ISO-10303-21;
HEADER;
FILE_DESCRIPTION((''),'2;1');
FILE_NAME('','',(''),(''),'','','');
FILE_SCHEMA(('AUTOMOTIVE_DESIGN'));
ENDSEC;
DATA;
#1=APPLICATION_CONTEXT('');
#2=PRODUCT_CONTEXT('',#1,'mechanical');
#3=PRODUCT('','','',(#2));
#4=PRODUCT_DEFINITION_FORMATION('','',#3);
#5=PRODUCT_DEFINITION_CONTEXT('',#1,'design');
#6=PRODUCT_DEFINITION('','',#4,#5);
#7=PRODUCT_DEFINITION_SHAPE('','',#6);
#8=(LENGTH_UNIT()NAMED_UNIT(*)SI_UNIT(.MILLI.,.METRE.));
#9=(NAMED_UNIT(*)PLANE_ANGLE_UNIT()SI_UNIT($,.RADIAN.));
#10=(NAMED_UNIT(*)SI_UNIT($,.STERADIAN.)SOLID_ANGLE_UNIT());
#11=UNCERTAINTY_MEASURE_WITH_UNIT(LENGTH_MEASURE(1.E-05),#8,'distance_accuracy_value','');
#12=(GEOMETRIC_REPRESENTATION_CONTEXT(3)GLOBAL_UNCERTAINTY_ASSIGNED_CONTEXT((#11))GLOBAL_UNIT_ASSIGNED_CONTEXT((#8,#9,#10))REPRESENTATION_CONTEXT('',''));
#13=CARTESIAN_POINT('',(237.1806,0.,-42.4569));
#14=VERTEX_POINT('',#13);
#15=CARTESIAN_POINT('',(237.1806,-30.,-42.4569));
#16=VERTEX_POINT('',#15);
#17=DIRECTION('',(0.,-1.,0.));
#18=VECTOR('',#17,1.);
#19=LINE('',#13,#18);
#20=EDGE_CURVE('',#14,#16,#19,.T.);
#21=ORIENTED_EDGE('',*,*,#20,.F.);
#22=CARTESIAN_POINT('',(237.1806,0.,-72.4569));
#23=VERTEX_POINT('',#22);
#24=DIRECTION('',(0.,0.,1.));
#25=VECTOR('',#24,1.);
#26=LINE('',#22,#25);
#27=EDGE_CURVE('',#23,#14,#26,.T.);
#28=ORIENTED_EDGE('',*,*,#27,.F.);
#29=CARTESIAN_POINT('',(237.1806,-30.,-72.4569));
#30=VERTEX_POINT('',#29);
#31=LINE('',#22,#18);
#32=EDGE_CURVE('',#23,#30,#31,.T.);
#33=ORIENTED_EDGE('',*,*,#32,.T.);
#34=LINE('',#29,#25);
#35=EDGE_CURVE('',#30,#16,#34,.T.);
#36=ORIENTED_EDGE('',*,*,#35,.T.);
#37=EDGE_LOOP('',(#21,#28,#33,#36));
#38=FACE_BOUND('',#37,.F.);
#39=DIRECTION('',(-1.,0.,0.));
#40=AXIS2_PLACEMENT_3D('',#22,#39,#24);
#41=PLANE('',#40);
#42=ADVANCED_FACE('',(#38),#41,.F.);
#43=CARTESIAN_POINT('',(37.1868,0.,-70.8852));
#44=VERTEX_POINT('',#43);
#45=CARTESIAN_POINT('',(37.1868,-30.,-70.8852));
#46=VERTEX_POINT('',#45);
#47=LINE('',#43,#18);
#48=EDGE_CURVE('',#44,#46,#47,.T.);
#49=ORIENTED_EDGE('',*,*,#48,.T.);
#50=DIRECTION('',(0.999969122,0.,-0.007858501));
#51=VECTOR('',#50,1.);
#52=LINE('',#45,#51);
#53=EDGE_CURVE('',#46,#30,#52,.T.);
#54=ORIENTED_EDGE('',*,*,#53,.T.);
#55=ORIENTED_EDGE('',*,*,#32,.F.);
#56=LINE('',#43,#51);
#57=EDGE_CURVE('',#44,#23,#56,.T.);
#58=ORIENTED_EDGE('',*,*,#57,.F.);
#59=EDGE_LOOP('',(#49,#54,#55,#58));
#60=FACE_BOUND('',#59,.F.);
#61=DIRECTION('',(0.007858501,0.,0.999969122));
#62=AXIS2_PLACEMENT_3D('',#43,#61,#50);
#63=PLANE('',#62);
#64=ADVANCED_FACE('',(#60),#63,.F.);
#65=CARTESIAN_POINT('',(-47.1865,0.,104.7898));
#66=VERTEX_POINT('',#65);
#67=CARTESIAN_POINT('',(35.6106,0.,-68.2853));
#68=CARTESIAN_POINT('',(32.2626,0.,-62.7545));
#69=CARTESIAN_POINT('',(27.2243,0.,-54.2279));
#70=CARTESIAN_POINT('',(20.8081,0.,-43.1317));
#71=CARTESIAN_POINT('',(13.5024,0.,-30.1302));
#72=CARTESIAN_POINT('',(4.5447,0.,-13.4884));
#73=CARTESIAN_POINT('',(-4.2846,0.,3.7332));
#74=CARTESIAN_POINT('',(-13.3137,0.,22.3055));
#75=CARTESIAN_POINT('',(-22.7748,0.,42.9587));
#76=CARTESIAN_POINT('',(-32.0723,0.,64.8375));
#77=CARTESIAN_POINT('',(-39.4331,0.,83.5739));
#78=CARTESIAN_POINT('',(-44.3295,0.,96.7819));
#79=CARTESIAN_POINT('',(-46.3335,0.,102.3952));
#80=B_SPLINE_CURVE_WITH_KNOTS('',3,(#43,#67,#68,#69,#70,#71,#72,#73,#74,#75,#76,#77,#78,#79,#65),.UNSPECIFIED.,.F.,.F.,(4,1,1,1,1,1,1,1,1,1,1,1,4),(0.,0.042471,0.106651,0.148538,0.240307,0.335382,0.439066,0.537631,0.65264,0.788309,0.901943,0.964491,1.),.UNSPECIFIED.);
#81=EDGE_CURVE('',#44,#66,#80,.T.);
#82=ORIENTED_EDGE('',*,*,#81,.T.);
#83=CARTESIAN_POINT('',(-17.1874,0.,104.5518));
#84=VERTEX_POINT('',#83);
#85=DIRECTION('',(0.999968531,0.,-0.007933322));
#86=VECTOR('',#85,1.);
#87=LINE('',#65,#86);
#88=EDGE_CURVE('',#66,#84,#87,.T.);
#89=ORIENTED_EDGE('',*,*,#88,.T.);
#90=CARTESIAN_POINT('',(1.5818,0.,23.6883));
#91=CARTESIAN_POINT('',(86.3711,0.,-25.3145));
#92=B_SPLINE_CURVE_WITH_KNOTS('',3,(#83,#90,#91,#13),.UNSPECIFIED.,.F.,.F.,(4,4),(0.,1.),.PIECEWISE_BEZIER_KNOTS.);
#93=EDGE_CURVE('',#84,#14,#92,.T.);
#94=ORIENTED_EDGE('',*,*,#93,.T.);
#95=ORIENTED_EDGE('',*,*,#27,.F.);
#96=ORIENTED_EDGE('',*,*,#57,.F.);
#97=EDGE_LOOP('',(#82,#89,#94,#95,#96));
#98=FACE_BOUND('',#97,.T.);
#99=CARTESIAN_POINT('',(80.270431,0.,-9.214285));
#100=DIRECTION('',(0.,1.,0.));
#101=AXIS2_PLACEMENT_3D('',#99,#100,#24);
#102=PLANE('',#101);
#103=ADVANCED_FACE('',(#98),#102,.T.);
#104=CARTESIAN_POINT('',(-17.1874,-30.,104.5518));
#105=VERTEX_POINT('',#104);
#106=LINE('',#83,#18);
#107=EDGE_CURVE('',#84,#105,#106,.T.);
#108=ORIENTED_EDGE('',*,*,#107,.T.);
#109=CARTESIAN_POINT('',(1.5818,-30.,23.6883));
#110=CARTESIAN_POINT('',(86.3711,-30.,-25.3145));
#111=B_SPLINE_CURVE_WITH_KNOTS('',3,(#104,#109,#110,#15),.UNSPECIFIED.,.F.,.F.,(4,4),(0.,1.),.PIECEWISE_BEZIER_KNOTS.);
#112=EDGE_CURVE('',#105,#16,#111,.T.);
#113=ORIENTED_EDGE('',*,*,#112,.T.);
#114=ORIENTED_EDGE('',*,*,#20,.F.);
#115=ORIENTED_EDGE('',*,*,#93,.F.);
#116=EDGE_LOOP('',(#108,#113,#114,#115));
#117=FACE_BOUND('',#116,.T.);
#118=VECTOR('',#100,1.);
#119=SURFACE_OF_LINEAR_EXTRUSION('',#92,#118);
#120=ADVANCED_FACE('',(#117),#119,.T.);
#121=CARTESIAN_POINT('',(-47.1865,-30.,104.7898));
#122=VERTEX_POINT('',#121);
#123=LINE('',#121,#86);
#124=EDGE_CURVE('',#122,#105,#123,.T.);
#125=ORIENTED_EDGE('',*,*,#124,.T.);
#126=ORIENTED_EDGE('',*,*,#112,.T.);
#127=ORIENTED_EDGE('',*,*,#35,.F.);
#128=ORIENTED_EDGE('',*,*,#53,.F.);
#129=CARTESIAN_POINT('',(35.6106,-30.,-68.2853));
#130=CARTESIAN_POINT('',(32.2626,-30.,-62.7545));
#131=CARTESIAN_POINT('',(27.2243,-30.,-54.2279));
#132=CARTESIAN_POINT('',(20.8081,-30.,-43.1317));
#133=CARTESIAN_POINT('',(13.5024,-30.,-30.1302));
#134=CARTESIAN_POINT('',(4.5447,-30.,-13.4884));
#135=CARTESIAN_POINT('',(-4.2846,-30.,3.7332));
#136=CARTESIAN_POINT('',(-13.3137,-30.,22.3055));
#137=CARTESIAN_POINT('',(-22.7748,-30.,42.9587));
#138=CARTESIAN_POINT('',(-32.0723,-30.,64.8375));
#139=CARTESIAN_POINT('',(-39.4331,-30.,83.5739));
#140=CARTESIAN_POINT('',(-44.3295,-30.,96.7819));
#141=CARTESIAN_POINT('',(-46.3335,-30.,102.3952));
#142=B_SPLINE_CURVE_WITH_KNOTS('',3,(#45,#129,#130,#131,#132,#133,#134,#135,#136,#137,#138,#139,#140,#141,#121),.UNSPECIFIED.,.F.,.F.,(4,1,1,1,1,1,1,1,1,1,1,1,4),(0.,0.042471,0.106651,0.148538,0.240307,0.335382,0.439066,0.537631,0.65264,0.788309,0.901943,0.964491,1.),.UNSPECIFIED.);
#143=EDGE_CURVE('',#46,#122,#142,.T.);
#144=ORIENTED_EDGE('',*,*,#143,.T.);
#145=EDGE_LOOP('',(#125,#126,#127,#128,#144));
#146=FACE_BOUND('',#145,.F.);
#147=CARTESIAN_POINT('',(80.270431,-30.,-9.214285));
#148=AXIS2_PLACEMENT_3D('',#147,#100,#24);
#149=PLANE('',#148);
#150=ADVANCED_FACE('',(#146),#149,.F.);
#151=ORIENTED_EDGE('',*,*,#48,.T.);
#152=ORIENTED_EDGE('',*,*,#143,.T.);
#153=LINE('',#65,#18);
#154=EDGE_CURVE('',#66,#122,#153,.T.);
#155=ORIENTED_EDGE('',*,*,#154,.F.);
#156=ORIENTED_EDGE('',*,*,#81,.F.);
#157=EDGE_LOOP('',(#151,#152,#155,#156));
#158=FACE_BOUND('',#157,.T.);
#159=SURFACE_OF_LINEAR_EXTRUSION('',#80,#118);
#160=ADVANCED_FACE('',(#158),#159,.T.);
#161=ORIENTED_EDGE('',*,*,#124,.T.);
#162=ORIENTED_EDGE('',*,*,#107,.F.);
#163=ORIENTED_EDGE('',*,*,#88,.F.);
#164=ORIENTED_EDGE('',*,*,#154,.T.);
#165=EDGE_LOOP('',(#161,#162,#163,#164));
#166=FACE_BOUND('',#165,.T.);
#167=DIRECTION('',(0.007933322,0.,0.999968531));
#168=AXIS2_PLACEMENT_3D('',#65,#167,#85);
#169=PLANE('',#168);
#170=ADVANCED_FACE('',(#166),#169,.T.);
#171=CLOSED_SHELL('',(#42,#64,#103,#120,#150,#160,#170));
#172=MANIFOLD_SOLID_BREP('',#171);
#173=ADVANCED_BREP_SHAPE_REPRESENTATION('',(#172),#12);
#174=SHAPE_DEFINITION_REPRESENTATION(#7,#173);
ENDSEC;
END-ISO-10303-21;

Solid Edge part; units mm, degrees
sketch "Sketch1" plane through (0, 0, 0) normal (0, -1, 0) x (1, 0, 0)
  line L0 (-47.1865, 104.7898) -> (-17.1874, 104.5518)
  spline S0 degree 3 poles (-17.1874, 104.5518) (1.5818, 23.6883) (86.3711, -25.3145) (237.1806, -42.4569) knots 0 0 0 0 1 1 1 1
  line L1 (237.1806, -72.4569) -> (237.1806, -42.4569)
  line L2 (37.1868, -70.8852) -> (237.1806, -72.4569)
  spline S1 degree 3 poles (37.1868, -70.8852) (35.6106, -68.2853) (32.2626, -62.7545) (27.2243, -54.2279) (20.8081, -43.1317) (13.5024, -30.1302) (4.5447, -13.4884) (-4.2846, 3.7332) (-13.3137, 22.3055) (-22.7748, 42.9587) (-32.0723, 64.8375) (-39.4331, 83.5739) (-44.3295, 96.7819) (-46.3335, 102.3952) (-47.1865, 104.7898) knots 0 0 0 0 0.042471 0.106651 0.148538 0.240307 0.335382 0.439066 0.537631 0.65264 0.788309 0.901943 0.964491 1 1 1 1
  dimension "D1" = 200
  dimension "D2" = 30
  dimension "D3" = 30
extrude "Protrusion1" add sketch "Sketch1" along normal blind 30
